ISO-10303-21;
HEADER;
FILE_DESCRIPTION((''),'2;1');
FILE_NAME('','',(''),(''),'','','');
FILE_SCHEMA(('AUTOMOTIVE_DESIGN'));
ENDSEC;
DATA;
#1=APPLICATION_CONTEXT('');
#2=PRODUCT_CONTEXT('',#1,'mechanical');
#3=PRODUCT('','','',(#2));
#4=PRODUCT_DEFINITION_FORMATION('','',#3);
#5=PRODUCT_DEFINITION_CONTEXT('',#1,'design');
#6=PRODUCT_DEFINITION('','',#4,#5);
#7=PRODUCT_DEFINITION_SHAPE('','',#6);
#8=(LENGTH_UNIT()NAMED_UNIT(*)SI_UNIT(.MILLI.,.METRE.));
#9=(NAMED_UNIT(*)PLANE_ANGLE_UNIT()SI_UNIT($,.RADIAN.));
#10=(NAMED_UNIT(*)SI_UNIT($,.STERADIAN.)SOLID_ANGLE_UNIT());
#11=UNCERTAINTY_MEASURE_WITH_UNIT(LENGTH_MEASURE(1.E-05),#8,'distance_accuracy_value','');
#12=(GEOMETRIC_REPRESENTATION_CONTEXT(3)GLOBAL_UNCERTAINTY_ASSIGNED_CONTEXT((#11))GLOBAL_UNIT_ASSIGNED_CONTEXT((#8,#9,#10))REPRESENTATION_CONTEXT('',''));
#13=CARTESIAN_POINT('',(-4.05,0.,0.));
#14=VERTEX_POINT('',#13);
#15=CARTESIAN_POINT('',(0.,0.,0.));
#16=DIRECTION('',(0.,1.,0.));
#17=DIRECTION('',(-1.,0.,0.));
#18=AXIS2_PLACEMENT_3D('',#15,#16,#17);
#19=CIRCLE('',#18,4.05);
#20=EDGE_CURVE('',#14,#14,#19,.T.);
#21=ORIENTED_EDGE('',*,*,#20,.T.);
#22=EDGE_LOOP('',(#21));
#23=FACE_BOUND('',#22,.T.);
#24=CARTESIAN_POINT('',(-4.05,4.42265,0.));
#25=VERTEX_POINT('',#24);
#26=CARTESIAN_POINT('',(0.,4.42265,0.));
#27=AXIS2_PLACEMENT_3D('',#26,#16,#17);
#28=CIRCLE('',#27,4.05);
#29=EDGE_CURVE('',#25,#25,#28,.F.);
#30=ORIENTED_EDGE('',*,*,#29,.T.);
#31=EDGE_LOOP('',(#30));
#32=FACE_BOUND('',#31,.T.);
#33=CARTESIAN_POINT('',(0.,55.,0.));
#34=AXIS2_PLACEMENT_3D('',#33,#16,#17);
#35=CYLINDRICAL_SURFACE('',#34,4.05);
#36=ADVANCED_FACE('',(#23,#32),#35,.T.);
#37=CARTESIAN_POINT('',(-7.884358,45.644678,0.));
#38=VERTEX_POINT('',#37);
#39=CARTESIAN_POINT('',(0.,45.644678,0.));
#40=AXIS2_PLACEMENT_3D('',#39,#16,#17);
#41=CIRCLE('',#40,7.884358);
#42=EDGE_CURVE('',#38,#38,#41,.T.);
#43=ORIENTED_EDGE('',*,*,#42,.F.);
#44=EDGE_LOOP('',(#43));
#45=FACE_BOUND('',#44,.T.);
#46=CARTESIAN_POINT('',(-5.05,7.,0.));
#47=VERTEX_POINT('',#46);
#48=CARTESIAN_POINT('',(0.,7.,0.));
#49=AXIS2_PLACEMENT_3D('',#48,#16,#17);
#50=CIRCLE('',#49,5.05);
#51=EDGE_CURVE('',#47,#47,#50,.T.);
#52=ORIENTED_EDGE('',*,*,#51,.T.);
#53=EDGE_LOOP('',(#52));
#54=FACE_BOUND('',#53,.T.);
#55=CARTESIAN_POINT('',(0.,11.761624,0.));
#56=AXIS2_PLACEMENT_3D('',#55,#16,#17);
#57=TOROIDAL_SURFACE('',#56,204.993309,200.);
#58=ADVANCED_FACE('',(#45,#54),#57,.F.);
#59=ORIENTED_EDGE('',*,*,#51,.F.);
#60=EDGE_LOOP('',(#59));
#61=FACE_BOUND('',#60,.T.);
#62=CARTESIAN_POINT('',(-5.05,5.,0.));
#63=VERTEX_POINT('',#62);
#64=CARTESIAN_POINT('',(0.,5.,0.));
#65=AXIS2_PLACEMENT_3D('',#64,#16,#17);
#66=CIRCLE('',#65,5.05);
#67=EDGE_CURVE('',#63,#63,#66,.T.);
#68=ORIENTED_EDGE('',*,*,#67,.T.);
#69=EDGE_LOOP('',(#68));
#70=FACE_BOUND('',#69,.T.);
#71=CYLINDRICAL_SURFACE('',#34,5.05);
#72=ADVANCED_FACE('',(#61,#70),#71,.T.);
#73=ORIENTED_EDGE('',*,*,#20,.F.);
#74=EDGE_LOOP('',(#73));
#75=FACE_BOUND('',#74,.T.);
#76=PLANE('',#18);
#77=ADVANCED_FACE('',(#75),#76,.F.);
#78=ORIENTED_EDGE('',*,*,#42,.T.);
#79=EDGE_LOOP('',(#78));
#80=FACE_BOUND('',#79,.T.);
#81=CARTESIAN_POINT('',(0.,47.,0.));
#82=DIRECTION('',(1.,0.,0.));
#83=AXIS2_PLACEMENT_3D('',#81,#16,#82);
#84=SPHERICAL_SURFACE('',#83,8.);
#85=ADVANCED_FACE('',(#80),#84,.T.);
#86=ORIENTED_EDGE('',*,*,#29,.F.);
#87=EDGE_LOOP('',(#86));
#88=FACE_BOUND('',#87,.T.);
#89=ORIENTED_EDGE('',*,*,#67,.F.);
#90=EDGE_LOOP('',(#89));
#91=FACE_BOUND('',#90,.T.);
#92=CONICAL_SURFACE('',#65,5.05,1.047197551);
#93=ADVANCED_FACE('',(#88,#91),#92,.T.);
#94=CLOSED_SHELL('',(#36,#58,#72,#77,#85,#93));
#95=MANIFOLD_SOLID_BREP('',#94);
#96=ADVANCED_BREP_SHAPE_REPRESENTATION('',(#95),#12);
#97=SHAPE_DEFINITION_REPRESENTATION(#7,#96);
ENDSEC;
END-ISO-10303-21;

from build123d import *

# Parameters (mm, degrees)
CHAMFER1_SIZE2 = 1
CHAMFER1_SIZE  = 0.577350269


with BuildPart() as part:
    # Sketch1 → Revolve1 (revolve)
    with BuildSketch(Plane.XY, mode=Mode.PRIVATE) as revolve1_sk:
        with BuildLine():
            Line((0, 0), (4.05, 0))
            Line((4.05, 0), (4.05, 5))
            Line((4.05, 5), (5.05, 5))
            Line((5.05, 5), (5.05, 7))
            ThreePointArc((5.05, 7), (5.529083978, 26.391142635), (7.88435805, 45.644677848))
            ThreePointArc((7.88435805, 45.644677848), (6.117294223, 52.155454528), (0, 55))
            Line((0, 55), (0, 0))
        make_face()
    revolve(revolve1_sk.sketch.rotate(Axis((0, 55, 0), (0, -1, 0)), 180), axis=Axis((0, 55, 0), (0, -1, 0)))

    # Chamfer1
    chamfer1_edges = [part.edges().sort_by_distance(p)[0] for p in [
        (4.05, 5, 0),
    ]]
    chamfer1_side = [part.faces().sort_by_distance(p)[0] for p in [
        (4.05, 4.988452995, 0),
    ]]
    chamfer(chamfer1_edges, length=CHAMFER1_SIZE - 0.0001, length2=CHAMFER1_SIZE2 - 0.0001, reference=chamfer1_side[0])  # a hair under: the kernel refuses the full size


solid = part.part
